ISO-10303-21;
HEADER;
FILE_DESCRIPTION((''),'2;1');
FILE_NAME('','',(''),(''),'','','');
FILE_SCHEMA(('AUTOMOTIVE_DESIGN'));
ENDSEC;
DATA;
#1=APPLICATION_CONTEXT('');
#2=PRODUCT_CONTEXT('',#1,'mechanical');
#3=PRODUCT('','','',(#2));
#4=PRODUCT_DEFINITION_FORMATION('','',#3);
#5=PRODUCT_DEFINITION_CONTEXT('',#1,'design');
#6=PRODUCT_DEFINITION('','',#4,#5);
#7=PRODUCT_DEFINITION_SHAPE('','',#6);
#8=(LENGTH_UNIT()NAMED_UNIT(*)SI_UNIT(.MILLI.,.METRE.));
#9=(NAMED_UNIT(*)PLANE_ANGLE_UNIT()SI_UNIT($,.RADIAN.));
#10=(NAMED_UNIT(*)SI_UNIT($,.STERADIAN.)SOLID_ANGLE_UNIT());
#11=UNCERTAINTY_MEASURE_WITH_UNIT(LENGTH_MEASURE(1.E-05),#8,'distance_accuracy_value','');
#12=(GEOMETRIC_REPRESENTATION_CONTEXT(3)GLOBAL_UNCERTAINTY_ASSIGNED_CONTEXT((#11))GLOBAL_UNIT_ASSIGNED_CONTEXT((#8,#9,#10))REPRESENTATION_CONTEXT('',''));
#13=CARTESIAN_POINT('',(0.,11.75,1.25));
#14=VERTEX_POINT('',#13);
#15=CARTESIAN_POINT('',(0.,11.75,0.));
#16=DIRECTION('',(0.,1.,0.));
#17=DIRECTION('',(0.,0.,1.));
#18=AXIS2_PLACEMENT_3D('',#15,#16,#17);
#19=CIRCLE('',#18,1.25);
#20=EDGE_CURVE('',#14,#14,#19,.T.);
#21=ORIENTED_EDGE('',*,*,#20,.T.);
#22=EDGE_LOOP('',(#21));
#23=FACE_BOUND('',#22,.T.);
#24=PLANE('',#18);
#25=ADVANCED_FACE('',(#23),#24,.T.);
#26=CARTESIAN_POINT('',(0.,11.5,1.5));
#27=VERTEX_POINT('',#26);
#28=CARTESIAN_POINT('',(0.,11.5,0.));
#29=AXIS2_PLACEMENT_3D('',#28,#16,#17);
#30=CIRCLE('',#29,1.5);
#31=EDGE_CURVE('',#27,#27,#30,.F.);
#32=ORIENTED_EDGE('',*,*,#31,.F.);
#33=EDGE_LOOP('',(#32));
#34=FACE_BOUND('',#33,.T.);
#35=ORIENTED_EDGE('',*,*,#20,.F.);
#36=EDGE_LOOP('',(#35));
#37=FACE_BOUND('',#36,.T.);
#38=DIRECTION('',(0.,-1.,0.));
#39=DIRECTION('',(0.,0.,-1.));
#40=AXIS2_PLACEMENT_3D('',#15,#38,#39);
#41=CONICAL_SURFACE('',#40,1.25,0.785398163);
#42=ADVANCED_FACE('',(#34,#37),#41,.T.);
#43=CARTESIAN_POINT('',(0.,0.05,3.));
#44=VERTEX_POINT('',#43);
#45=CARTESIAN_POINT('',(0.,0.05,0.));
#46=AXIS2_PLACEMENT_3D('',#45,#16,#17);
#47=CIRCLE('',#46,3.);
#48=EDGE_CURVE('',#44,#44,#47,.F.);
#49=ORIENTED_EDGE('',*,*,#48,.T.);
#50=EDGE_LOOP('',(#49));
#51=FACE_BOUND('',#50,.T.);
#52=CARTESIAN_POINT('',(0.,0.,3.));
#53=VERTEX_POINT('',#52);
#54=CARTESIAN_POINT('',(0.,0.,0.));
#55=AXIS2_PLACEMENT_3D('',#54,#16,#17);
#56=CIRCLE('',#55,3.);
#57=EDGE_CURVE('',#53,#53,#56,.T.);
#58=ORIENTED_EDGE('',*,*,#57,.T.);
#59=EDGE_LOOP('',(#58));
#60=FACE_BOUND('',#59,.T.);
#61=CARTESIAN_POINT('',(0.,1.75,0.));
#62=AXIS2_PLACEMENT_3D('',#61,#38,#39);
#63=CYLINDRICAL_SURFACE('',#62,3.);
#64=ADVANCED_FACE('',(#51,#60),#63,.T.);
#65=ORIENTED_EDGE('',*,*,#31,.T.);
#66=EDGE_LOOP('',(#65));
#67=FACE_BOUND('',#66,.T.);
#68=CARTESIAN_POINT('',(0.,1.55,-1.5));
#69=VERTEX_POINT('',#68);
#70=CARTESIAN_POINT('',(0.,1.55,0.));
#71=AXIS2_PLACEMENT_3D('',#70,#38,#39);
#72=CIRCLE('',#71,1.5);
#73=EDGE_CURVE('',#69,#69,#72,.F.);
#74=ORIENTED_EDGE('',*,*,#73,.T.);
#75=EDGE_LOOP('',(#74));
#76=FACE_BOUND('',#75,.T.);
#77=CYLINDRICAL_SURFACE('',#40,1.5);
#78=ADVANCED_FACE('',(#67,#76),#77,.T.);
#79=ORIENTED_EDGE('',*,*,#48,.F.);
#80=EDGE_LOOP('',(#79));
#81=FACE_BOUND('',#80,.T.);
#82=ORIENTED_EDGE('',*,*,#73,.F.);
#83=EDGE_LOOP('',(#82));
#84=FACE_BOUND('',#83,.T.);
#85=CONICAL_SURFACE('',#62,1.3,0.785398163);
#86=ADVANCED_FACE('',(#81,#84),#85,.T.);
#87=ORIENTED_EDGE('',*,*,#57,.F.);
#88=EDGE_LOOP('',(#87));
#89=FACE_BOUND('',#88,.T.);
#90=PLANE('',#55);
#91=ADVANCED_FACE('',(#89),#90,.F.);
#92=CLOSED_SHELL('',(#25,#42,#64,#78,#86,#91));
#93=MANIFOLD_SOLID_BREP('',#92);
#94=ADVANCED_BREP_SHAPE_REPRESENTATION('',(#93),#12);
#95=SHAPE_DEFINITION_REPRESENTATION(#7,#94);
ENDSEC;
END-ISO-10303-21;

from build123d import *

# Parameters (mm, degrees)
SKETCH1_R           = 3
BOSS_EXTRUDE1_DEPTH = 1.75
SKETCH2_R           = 1.5
BOSS_EXTRUDE2_DEPTH = 10
CHAMFER1_SIZE       = 1.7
CHAMFER2_SIZE       = 0.25


with BuildPart() as part:
    # Sketch1 → Boss-Extrude1 (new body)
    with BuildSketch(Plane(origin=(0, 0, 0), x_dir=(1, 0, 0), z_dir=(0, 1, 0))):
        with Locations(Location((0, 0, 0), (0, 0, 270))):
            Circle(SKETCH1_R)
    extrude(amount=BOSS_EXTRUDE1_DEPTH)

    # Sketch2 → Boss-Extrude2 (add)
    with BuildSketch(Plane(origin=(0, 1.75, 0), x_dir=(1, 0, 0), z_dir=(0, 1, 0))):
        with Locations(Location((0, 0, 0), (0, 0, 270))):
            Circle(SKETCH2_R)
    extrude(amount=BOSS_EXTRUDE2_DEPTH)

    # Chamfer1
    # the kernel refuses this chamfer: 1.7 mm, written as the material it takes off along each edge
    with BuildSketch(Plane(origin=(0, 1.75, 0), x_dir=(0, 0, 1), z_dir=(-1, 0, 0))) as chamfer1_piece_1_section:
        Polygon((3, -CHAMFER1_SIZE), (3 - CHAMFER1_SIZE, 0), (3, 0), align=None)
    chamfer1_piece_1 = revolve(axis=Axis((0, 1.75, 0), (0, 1, 0)), mode=Mode.PRIVATE)
    chamfer1_piece_1 = chamfer1_piece_1 - Plane(origin=(0, 0.796367942, 0), x_dir=(0, 0, 1), z_dir=(0, -1, 0)) * Cylinder(1.5, 12, mode=Mode.PRIVATE)
    add(chamfer1_piece_1, mode=Mode.SUBTRACT)

    # Chamfer2
    chamfer2_edges = [part.edges().sort_by_distance(p)[0] for p in [
        (0, 11.75, -1.5),
    ]]
    chamfer(chamfer2_edges, length=CHAMFER2_SIZE)


solid = part.part
